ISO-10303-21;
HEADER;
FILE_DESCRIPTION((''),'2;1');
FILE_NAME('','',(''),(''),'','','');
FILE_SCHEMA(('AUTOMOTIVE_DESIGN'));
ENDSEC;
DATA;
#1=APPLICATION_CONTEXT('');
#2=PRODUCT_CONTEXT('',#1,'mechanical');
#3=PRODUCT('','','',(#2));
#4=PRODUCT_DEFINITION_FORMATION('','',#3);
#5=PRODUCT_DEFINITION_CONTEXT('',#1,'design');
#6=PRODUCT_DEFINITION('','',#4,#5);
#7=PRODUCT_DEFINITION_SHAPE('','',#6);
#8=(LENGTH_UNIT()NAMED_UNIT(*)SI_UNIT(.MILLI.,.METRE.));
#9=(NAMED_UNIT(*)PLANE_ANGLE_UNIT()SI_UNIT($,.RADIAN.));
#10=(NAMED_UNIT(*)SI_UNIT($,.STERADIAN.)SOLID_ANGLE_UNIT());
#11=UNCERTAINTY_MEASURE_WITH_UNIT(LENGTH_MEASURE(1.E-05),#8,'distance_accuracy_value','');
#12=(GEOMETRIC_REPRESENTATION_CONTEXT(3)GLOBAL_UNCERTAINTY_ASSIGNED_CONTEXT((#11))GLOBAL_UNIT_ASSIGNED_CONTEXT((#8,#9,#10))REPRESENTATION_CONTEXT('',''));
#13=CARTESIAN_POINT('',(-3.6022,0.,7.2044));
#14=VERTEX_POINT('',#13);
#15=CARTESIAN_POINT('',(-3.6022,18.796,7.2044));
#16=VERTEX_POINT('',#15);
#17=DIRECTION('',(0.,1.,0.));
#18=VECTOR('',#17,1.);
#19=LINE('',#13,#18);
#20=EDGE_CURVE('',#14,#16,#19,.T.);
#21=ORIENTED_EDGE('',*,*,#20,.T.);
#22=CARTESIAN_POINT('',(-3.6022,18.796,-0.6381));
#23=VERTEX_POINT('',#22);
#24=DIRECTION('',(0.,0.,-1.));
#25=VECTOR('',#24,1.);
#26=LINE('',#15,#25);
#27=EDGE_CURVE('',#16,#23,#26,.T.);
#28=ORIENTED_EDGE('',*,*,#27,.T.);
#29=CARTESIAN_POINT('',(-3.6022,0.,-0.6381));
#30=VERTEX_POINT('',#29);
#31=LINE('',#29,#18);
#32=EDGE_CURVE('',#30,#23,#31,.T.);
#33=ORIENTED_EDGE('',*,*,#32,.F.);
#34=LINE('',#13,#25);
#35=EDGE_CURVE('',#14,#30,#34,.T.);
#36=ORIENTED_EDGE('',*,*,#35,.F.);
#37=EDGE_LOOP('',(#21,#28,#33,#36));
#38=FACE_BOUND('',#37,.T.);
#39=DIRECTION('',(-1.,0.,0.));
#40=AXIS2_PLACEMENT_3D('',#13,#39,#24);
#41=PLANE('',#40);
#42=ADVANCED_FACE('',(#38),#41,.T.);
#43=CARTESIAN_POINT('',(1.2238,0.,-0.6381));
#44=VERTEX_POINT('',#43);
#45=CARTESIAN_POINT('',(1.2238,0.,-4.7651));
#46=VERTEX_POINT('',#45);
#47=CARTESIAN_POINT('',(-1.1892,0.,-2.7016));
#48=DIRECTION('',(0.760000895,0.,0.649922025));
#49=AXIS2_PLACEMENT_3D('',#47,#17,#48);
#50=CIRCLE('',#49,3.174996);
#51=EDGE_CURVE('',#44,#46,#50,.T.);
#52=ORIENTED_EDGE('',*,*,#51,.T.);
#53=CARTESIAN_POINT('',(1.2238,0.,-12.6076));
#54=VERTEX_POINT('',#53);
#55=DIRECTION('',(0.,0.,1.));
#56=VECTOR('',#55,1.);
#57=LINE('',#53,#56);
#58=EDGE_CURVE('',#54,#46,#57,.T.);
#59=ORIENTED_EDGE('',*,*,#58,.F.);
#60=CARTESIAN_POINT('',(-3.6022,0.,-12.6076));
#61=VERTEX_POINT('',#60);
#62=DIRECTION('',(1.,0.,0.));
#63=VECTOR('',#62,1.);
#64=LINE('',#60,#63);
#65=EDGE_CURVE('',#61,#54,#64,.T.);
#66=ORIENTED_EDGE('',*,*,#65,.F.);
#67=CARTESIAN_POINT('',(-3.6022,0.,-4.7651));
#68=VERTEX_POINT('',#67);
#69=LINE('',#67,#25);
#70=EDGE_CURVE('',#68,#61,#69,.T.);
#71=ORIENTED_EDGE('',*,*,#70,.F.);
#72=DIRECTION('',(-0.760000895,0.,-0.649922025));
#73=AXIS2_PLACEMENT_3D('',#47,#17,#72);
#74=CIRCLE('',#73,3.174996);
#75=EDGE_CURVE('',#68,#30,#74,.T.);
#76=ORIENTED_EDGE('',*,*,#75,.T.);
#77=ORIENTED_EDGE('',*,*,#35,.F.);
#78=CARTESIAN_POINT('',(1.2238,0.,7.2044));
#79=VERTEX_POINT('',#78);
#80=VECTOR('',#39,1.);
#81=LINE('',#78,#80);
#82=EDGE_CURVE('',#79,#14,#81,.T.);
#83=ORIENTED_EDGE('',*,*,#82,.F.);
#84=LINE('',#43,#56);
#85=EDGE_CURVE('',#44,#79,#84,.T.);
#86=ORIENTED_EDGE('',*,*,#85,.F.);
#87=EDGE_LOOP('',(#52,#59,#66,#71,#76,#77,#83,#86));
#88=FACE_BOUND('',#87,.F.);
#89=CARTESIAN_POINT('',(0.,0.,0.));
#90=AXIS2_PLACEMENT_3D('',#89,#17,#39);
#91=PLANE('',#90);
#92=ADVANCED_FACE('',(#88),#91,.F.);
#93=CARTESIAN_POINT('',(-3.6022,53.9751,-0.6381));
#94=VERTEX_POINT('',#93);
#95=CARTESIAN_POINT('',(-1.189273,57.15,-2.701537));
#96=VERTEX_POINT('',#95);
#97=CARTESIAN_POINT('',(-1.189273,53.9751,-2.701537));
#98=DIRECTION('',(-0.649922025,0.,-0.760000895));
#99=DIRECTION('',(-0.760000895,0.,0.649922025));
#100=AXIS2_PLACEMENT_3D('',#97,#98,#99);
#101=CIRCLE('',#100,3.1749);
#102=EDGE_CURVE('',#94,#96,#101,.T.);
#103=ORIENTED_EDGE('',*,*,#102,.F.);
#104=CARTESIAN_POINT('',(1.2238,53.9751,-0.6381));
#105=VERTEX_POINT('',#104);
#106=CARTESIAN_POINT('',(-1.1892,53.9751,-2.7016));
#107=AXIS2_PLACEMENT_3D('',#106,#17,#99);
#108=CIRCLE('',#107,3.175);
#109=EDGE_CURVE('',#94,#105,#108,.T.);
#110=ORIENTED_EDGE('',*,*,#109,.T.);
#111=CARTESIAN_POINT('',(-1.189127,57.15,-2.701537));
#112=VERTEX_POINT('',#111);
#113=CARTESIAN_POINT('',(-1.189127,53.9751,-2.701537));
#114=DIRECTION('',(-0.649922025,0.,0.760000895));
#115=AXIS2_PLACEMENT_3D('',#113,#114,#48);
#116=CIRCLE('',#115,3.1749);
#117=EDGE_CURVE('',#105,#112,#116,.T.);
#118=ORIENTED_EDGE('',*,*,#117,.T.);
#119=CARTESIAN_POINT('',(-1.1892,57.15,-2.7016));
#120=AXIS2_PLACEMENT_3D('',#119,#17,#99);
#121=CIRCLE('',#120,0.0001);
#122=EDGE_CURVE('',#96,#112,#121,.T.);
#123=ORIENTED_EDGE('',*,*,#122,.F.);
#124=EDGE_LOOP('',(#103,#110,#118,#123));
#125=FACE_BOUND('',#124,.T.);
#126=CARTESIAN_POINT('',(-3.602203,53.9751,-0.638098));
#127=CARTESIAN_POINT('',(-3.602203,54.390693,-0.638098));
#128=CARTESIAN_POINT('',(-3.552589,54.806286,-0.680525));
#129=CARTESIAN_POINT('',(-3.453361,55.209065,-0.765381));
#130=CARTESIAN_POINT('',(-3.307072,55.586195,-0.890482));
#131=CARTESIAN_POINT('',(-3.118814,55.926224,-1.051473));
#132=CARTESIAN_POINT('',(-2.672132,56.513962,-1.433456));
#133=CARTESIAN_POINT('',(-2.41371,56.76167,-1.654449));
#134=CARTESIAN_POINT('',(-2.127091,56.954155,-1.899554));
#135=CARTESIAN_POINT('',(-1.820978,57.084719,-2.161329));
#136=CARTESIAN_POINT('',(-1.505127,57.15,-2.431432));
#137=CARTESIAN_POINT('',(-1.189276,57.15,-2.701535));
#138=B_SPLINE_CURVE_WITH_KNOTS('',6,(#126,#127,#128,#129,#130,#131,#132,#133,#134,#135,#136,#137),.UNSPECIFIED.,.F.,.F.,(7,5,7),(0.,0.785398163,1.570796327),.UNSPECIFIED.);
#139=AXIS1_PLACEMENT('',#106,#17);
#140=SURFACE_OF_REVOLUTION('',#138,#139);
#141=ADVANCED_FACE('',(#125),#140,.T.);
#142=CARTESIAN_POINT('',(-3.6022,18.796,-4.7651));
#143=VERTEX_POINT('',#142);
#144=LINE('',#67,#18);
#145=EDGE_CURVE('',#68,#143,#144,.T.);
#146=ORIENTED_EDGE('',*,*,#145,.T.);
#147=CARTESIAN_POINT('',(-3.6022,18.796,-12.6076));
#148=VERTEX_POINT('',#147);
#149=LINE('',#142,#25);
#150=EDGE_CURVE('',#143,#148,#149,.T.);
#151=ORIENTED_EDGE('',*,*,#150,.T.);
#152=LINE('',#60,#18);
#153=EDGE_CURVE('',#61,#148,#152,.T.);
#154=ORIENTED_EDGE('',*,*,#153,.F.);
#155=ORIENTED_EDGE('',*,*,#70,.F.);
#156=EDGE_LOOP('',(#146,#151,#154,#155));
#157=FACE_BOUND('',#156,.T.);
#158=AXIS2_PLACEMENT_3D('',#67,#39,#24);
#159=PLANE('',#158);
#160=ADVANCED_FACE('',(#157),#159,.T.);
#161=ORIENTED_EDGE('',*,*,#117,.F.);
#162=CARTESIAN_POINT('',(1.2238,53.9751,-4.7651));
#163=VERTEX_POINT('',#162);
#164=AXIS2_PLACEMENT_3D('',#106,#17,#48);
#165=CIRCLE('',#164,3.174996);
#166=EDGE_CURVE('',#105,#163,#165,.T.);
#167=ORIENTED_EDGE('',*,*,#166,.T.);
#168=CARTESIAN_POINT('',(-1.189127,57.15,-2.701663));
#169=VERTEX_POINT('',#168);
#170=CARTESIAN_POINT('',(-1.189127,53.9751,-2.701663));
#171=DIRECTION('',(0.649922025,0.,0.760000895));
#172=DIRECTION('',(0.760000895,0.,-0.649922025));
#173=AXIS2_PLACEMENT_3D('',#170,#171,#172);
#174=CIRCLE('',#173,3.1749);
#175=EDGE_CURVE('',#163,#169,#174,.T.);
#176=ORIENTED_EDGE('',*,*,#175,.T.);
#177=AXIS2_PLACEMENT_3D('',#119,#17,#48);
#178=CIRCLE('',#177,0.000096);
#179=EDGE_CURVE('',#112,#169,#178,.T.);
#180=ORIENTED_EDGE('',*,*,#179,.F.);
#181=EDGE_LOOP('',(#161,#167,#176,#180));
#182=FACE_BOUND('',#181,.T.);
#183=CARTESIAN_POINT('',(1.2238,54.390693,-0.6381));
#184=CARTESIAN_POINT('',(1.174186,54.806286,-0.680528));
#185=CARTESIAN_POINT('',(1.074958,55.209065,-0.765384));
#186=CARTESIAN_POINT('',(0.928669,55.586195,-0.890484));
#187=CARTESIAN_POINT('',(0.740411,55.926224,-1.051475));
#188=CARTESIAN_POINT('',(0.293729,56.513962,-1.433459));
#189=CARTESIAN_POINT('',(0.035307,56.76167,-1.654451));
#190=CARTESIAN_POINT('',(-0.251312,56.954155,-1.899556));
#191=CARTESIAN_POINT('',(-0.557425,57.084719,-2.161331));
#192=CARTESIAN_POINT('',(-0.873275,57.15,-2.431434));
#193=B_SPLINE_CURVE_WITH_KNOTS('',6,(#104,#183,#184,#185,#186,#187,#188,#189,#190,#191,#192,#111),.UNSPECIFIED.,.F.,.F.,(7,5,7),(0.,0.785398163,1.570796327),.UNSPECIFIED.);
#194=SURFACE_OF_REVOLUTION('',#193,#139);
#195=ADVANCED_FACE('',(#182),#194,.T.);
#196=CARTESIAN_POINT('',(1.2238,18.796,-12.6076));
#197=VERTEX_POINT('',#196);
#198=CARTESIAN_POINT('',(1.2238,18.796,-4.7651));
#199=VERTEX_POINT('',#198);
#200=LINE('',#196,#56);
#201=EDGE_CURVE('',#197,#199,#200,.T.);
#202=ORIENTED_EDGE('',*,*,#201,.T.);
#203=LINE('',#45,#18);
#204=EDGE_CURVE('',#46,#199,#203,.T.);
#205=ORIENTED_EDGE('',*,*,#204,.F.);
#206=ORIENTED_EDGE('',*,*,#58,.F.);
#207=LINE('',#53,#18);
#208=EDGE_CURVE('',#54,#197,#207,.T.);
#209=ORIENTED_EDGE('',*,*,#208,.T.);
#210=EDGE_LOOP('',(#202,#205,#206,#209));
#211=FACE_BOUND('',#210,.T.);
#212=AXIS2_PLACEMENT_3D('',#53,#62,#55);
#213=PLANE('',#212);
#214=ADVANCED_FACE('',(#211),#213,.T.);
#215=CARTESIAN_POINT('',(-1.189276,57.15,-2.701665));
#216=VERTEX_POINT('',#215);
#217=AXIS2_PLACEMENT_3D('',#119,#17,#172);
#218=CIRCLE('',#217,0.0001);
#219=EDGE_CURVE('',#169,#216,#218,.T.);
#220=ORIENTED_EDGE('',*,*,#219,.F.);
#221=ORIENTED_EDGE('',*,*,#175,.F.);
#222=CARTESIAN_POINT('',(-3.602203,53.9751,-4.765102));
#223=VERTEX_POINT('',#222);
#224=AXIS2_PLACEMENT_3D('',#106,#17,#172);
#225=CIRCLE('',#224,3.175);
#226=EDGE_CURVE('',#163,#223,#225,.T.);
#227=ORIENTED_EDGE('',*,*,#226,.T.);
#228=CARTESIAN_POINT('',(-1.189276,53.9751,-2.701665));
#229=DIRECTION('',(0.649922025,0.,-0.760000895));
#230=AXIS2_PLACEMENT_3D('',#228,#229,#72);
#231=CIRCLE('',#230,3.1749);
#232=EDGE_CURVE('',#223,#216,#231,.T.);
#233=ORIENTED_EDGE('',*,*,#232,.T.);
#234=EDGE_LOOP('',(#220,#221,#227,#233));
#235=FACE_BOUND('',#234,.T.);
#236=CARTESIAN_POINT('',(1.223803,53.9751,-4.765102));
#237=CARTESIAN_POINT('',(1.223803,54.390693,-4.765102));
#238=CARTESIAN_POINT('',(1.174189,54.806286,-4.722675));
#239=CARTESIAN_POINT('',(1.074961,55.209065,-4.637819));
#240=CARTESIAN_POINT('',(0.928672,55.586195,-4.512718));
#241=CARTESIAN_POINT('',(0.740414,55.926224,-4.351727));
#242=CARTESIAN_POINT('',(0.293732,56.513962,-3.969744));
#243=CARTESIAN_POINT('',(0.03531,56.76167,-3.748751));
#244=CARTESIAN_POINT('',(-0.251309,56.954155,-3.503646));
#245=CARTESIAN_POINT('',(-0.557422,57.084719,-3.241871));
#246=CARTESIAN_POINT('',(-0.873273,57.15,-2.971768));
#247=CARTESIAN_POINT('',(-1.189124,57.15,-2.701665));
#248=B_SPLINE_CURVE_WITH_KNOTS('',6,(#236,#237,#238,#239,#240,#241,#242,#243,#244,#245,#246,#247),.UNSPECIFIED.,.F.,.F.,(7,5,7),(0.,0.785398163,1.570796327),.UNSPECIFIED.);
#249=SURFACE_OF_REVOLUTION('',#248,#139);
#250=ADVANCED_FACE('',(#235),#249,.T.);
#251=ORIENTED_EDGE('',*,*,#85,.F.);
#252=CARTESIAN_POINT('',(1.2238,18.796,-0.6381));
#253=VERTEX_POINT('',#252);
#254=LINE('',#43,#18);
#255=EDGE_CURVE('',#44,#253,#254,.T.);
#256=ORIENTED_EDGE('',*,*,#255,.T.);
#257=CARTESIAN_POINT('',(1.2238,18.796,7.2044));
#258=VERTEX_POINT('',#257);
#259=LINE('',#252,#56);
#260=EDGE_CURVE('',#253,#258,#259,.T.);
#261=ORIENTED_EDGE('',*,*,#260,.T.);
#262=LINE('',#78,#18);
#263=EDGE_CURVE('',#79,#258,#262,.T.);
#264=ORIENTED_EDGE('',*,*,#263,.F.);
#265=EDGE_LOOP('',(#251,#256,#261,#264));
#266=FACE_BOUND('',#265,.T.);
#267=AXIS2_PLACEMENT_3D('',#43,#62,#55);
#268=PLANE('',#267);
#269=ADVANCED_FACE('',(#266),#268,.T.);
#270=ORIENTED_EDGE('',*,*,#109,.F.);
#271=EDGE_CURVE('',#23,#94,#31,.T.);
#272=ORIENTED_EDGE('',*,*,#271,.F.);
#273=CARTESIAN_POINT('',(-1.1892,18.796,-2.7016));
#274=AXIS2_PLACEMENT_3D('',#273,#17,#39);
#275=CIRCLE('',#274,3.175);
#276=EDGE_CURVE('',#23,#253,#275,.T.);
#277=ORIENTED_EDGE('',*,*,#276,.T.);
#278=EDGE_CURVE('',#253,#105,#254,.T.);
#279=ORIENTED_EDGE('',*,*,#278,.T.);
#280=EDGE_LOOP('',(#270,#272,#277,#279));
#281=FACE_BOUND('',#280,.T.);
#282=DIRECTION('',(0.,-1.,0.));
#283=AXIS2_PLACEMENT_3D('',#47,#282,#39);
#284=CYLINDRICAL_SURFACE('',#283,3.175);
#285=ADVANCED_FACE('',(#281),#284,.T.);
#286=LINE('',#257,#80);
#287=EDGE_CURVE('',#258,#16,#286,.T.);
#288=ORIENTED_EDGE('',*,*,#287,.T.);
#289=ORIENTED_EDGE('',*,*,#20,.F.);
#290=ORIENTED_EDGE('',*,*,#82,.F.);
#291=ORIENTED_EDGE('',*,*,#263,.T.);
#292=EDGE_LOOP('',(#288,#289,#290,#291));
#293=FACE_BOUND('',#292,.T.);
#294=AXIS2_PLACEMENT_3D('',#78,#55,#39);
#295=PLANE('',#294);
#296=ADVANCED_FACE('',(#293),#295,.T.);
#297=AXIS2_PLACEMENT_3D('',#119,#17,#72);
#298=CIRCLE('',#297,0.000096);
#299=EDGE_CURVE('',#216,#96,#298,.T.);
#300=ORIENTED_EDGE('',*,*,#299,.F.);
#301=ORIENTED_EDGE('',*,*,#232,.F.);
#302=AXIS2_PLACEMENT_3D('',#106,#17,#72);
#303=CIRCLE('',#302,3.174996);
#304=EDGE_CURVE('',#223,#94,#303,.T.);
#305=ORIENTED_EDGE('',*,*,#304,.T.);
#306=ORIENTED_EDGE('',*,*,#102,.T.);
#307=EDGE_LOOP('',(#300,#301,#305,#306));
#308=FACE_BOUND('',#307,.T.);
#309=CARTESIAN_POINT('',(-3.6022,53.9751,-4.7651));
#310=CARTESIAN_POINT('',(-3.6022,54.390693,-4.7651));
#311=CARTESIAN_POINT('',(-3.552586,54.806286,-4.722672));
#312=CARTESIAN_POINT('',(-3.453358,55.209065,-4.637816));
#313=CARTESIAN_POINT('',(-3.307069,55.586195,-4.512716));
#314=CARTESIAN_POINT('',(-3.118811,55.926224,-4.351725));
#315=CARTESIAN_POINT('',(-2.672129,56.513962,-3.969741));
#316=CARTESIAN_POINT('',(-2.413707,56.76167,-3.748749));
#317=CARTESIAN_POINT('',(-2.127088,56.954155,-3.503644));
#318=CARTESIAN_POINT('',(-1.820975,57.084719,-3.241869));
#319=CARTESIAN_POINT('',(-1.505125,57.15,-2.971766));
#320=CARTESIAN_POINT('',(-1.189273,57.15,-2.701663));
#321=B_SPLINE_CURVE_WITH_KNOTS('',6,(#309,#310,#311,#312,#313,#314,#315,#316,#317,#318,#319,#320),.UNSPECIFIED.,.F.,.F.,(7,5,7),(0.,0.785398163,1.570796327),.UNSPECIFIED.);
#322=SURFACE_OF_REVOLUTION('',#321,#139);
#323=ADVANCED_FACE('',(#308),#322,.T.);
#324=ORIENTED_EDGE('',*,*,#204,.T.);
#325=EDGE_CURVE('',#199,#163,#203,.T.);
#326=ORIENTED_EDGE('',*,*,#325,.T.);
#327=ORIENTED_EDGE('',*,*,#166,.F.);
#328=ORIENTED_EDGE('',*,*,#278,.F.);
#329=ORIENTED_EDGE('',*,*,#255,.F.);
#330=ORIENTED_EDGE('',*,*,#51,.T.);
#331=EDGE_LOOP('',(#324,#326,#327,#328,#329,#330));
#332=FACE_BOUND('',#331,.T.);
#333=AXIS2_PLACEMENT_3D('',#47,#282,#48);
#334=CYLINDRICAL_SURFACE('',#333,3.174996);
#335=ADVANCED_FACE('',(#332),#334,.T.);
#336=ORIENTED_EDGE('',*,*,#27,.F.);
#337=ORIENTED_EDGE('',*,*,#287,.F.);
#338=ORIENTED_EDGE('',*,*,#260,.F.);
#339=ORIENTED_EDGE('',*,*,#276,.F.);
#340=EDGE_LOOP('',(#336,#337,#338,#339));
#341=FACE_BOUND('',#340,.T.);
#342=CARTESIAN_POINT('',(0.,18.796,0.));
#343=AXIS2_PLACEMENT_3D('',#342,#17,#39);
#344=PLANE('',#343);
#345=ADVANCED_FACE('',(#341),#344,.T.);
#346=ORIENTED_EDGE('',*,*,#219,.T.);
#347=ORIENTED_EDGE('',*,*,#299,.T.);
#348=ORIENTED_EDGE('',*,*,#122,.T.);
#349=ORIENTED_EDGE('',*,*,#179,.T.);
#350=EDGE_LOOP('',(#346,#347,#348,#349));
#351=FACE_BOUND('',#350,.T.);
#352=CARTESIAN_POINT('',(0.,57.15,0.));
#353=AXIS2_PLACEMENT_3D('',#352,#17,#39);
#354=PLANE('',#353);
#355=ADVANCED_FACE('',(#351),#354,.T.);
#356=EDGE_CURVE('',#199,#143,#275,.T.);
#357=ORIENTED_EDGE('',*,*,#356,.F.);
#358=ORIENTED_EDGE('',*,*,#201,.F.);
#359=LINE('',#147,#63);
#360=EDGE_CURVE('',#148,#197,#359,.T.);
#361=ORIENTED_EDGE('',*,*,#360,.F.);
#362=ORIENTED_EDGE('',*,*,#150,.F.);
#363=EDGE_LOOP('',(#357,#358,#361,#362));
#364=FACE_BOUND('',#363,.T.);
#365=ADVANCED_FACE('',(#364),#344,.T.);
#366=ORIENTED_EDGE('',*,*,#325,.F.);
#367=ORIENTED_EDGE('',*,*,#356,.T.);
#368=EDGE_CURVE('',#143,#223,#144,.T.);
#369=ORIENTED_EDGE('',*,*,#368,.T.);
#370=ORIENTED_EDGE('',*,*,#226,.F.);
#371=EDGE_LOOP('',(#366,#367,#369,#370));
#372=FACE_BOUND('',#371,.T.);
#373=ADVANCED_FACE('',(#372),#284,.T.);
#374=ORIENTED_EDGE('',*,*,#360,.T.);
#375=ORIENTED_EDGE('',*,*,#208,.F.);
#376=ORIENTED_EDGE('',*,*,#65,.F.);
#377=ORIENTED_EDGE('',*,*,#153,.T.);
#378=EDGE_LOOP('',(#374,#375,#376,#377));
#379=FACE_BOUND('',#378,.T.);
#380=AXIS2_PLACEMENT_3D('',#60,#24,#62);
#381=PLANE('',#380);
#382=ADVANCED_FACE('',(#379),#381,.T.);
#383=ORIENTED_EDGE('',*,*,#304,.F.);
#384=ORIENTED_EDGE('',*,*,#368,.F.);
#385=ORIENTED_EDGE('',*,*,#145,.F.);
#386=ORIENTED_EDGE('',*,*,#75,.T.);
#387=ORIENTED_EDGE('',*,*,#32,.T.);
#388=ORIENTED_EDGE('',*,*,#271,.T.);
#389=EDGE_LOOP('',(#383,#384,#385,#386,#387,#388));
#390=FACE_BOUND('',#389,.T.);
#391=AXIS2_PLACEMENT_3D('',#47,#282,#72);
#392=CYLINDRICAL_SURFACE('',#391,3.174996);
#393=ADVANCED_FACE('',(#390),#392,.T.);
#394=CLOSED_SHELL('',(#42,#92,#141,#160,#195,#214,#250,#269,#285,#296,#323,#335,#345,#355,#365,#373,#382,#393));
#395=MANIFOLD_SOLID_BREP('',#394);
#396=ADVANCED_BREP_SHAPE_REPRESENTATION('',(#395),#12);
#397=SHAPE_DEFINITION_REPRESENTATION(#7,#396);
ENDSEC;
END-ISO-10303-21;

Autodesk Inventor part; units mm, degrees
ref_plane "YZ Plane" through (0, 0, 0) normal (1, 0, 0) x (0, 1, 0)
ref_plane "XZ Plane" through (0, 0, 0) normal (0, 1, 0) x (-1, 0, 0)
ref_plane "XY Plane" through (0, 0, 0) normal (0, 0, 1) x (1, 0, 0)
sketch "Sketch1" plane through (0, 0, 0) normal (0, 1, 0) x (-1, 0, 0)
  line L0 (-1.2238, 7.2044) -> (3.6022, 7.2044)
  line L1 (3.6022, -12.6076) -> (-1.2238, -12.6076)
  line L2 (3.6022, 7.2044) -> (3.6022, -0.6381)
  line L3 (3.6022, -4.7651) -> (3.6022, -12.6076)
  line L4 (-1.2238, -12.6076) -> (-1.2238, -4.7651)
  line L5 (-1.2238, -0.6381) -> (-1.2238, 7.2044)
  arc A0 (-1.2238, -0.6381) -> (-1.2238, -4.7651) centre (1.1892, -2.7016) ccw
  arc A1 (3.6022, -4.7651) -> (3.6022, -0.6381) centre (1.1892, -2.7016) ccw
  circle A2 centre (1.1892, -2.7016) radius 3.175
  point P0 (0, 0)
  dimension "d0" = 19.812
  dimension "d1" = 4.826
  dimension "d3" = 9.906
extrude "Extrusion1" add sketch "Sketch1" along normal blind 18.796 contours L0 L2 A2 L5 | A2 L3 L1 L4
extrude "Extrusion2" add sketch "Sketch1" along normal blind 57.15 contours A2 A1 A0
fillet "Fillet1" radius 3.175 1 edges at (1.9858, 57.15, -2.7016)
properties part number "Dreidel Pole"
